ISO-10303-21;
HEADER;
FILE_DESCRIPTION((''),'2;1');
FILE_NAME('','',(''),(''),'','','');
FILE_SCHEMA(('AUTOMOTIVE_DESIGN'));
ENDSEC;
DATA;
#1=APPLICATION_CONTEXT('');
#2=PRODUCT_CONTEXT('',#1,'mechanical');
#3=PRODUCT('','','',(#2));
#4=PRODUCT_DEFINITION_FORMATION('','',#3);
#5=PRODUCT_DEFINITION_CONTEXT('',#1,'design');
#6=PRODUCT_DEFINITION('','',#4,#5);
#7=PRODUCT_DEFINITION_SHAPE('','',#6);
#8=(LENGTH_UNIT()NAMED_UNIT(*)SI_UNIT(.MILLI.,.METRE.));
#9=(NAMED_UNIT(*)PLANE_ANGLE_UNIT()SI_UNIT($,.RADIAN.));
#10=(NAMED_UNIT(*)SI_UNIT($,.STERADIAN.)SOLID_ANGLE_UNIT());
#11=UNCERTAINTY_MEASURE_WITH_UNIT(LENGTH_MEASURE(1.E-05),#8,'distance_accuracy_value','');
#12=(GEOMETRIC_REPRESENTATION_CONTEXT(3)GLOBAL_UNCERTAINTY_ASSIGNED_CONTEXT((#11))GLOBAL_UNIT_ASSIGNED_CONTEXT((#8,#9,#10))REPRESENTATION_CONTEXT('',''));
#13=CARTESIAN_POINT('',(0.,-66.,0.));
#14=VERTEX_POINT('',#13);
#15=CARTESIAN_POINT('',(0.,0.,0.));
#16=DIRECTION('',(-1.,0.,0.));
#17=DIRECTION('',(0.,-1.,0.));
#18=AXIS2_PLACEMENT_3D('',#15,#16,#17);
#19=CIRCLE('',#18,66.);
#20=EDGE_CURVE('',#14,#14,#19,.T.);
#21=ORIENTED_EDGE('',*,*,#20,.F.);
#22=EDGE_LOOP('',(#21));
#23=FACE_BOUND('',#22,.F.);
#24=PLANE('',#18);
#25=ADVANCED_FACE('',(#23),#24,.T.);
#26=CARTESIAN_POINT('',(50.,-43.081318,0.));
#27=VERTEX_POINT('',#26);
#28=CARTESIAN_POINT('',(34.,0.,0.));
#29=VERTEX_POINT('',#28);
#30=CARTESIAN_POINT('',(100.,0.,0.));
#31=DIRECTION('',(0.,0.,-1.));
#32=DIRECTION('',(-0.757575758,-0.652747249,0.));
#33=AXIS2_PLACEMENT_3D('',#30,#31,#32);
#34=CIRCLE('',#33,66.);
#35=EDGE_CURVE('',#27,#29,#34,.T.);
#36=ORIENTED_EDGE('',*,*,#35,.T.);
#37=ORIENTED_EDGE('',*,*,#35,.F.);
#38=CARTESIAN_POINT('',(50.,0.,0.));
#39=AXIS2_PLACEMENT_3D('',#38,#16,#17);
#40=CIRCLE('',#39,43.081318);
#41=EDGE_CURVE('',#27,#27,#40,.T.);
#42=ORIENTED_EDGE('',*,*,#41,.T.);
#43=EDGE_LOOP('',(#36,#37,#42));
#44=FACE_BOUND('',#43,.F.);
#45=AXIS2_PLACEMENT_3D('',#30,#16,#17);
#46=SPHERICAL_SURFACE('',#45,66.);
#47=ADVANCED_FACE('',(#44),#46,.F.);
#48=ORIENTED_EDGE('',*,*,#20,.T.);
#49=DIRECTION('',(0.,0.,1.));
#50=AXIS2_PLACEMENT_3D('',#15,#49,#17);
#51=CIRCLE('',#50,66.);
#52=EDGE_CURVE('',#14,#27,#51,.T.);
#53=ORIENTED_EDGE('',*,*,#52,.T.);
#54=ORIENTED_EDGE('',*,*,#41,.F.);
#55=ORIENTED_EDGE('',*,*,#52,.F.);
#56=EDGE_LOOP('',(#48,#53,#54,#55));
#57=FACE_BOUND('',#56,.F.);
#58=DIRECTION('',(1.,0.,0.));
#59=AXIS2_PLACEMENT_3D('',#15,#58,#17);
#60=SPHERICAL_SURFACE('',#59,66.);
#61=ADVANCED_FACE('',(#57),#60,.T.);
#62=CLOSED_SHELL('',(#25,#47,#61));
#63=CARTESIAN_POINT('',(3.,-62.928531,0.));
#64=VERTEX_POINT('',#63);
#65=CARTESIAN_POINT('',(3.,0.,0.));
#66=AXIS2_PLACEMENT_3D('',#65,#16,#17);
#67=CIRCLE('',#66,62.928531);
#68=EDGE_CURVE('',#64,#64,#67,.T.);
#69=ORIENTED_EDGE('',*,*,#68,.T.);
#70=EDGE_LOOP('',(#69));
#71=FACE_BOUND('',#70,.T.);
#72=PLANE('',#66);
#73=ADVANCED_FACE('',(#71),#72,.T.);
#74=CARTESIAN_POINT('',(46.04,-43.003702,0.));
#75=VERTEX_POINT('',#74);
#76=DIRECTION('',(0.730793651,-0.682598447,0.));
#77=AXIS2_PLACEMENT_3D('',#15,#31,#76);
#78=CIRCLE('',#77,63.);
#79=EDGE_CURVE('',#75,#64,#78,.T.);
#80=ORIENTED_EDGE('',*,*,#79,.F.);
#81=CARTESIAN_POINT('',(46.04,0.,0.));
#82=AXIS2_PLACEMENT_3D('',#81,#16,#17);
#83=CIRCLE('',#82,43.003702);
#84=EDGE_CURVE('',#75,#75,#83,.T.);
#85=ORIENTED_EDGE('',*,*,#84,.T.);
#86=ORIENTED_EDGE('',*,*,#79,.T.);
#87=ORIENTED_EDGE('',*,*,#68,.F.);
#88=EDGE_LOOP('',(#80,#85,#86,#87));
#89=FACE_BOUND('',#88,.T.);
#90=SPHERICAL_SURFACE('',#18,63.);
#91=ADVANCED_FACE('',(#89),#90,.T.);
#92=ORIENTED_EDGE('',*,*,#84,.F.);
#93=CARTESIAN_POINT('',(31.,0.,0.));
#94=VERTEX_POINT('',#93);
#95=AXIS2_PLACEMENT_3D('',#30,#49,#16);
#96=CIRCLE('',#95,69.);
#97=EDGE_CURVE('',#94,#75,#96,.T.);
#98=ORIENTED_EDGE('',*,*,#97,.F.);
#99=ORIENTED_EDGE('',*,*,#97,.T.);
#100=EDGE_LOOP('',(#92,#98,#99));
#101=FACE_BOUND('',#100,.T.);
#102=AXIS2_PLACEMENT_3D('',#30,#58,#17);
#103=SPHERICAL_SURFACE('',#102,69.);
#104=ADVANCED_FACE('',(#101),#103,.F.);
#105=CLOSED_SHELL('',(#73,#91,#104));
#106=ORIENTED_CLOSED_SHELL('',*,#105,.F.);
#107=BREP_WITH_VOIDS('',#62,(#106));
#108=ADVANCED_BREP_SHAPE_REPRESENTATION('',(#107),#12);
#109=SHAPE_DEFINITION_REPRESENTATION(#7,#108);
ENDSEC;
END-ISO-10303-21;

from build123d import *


# Not quite as in the source:
# - a feature names something its author has since deleted; it is built from what else it names


with BuildPart() as f1:
    # F0 (on Top) → F1 (revolve)
    with BuildSketch(Plane.XY):
        with BuildLine():
            ThreePointArc((46.04, -43.0037021662), (26.4665845911, -57.1709707813), (3, -62.9285308902))
            Line((3, -62.9285308902), (3, 0))
            Line((3, 0), (0, 0))
            Line((0, 0), (0, -66))
            ThreePointArc((0, -66), (27.5012088992, -59.9973625177), (50, -43.0813184571))
            ThreePointArc((50, -43.0813184571), (38.129166807, -22.9782505862), (34, 0))
            Line((34, 0), (31, 0))
            ThreePointArc((31, 0), (34.8684408293, -22.7789376398), (46.04, -43.0037021662))
        make_face()
    revolve(axis=Axis((-14.5, 0, 0), (-1, 0, 0)))


solid = f1.part
